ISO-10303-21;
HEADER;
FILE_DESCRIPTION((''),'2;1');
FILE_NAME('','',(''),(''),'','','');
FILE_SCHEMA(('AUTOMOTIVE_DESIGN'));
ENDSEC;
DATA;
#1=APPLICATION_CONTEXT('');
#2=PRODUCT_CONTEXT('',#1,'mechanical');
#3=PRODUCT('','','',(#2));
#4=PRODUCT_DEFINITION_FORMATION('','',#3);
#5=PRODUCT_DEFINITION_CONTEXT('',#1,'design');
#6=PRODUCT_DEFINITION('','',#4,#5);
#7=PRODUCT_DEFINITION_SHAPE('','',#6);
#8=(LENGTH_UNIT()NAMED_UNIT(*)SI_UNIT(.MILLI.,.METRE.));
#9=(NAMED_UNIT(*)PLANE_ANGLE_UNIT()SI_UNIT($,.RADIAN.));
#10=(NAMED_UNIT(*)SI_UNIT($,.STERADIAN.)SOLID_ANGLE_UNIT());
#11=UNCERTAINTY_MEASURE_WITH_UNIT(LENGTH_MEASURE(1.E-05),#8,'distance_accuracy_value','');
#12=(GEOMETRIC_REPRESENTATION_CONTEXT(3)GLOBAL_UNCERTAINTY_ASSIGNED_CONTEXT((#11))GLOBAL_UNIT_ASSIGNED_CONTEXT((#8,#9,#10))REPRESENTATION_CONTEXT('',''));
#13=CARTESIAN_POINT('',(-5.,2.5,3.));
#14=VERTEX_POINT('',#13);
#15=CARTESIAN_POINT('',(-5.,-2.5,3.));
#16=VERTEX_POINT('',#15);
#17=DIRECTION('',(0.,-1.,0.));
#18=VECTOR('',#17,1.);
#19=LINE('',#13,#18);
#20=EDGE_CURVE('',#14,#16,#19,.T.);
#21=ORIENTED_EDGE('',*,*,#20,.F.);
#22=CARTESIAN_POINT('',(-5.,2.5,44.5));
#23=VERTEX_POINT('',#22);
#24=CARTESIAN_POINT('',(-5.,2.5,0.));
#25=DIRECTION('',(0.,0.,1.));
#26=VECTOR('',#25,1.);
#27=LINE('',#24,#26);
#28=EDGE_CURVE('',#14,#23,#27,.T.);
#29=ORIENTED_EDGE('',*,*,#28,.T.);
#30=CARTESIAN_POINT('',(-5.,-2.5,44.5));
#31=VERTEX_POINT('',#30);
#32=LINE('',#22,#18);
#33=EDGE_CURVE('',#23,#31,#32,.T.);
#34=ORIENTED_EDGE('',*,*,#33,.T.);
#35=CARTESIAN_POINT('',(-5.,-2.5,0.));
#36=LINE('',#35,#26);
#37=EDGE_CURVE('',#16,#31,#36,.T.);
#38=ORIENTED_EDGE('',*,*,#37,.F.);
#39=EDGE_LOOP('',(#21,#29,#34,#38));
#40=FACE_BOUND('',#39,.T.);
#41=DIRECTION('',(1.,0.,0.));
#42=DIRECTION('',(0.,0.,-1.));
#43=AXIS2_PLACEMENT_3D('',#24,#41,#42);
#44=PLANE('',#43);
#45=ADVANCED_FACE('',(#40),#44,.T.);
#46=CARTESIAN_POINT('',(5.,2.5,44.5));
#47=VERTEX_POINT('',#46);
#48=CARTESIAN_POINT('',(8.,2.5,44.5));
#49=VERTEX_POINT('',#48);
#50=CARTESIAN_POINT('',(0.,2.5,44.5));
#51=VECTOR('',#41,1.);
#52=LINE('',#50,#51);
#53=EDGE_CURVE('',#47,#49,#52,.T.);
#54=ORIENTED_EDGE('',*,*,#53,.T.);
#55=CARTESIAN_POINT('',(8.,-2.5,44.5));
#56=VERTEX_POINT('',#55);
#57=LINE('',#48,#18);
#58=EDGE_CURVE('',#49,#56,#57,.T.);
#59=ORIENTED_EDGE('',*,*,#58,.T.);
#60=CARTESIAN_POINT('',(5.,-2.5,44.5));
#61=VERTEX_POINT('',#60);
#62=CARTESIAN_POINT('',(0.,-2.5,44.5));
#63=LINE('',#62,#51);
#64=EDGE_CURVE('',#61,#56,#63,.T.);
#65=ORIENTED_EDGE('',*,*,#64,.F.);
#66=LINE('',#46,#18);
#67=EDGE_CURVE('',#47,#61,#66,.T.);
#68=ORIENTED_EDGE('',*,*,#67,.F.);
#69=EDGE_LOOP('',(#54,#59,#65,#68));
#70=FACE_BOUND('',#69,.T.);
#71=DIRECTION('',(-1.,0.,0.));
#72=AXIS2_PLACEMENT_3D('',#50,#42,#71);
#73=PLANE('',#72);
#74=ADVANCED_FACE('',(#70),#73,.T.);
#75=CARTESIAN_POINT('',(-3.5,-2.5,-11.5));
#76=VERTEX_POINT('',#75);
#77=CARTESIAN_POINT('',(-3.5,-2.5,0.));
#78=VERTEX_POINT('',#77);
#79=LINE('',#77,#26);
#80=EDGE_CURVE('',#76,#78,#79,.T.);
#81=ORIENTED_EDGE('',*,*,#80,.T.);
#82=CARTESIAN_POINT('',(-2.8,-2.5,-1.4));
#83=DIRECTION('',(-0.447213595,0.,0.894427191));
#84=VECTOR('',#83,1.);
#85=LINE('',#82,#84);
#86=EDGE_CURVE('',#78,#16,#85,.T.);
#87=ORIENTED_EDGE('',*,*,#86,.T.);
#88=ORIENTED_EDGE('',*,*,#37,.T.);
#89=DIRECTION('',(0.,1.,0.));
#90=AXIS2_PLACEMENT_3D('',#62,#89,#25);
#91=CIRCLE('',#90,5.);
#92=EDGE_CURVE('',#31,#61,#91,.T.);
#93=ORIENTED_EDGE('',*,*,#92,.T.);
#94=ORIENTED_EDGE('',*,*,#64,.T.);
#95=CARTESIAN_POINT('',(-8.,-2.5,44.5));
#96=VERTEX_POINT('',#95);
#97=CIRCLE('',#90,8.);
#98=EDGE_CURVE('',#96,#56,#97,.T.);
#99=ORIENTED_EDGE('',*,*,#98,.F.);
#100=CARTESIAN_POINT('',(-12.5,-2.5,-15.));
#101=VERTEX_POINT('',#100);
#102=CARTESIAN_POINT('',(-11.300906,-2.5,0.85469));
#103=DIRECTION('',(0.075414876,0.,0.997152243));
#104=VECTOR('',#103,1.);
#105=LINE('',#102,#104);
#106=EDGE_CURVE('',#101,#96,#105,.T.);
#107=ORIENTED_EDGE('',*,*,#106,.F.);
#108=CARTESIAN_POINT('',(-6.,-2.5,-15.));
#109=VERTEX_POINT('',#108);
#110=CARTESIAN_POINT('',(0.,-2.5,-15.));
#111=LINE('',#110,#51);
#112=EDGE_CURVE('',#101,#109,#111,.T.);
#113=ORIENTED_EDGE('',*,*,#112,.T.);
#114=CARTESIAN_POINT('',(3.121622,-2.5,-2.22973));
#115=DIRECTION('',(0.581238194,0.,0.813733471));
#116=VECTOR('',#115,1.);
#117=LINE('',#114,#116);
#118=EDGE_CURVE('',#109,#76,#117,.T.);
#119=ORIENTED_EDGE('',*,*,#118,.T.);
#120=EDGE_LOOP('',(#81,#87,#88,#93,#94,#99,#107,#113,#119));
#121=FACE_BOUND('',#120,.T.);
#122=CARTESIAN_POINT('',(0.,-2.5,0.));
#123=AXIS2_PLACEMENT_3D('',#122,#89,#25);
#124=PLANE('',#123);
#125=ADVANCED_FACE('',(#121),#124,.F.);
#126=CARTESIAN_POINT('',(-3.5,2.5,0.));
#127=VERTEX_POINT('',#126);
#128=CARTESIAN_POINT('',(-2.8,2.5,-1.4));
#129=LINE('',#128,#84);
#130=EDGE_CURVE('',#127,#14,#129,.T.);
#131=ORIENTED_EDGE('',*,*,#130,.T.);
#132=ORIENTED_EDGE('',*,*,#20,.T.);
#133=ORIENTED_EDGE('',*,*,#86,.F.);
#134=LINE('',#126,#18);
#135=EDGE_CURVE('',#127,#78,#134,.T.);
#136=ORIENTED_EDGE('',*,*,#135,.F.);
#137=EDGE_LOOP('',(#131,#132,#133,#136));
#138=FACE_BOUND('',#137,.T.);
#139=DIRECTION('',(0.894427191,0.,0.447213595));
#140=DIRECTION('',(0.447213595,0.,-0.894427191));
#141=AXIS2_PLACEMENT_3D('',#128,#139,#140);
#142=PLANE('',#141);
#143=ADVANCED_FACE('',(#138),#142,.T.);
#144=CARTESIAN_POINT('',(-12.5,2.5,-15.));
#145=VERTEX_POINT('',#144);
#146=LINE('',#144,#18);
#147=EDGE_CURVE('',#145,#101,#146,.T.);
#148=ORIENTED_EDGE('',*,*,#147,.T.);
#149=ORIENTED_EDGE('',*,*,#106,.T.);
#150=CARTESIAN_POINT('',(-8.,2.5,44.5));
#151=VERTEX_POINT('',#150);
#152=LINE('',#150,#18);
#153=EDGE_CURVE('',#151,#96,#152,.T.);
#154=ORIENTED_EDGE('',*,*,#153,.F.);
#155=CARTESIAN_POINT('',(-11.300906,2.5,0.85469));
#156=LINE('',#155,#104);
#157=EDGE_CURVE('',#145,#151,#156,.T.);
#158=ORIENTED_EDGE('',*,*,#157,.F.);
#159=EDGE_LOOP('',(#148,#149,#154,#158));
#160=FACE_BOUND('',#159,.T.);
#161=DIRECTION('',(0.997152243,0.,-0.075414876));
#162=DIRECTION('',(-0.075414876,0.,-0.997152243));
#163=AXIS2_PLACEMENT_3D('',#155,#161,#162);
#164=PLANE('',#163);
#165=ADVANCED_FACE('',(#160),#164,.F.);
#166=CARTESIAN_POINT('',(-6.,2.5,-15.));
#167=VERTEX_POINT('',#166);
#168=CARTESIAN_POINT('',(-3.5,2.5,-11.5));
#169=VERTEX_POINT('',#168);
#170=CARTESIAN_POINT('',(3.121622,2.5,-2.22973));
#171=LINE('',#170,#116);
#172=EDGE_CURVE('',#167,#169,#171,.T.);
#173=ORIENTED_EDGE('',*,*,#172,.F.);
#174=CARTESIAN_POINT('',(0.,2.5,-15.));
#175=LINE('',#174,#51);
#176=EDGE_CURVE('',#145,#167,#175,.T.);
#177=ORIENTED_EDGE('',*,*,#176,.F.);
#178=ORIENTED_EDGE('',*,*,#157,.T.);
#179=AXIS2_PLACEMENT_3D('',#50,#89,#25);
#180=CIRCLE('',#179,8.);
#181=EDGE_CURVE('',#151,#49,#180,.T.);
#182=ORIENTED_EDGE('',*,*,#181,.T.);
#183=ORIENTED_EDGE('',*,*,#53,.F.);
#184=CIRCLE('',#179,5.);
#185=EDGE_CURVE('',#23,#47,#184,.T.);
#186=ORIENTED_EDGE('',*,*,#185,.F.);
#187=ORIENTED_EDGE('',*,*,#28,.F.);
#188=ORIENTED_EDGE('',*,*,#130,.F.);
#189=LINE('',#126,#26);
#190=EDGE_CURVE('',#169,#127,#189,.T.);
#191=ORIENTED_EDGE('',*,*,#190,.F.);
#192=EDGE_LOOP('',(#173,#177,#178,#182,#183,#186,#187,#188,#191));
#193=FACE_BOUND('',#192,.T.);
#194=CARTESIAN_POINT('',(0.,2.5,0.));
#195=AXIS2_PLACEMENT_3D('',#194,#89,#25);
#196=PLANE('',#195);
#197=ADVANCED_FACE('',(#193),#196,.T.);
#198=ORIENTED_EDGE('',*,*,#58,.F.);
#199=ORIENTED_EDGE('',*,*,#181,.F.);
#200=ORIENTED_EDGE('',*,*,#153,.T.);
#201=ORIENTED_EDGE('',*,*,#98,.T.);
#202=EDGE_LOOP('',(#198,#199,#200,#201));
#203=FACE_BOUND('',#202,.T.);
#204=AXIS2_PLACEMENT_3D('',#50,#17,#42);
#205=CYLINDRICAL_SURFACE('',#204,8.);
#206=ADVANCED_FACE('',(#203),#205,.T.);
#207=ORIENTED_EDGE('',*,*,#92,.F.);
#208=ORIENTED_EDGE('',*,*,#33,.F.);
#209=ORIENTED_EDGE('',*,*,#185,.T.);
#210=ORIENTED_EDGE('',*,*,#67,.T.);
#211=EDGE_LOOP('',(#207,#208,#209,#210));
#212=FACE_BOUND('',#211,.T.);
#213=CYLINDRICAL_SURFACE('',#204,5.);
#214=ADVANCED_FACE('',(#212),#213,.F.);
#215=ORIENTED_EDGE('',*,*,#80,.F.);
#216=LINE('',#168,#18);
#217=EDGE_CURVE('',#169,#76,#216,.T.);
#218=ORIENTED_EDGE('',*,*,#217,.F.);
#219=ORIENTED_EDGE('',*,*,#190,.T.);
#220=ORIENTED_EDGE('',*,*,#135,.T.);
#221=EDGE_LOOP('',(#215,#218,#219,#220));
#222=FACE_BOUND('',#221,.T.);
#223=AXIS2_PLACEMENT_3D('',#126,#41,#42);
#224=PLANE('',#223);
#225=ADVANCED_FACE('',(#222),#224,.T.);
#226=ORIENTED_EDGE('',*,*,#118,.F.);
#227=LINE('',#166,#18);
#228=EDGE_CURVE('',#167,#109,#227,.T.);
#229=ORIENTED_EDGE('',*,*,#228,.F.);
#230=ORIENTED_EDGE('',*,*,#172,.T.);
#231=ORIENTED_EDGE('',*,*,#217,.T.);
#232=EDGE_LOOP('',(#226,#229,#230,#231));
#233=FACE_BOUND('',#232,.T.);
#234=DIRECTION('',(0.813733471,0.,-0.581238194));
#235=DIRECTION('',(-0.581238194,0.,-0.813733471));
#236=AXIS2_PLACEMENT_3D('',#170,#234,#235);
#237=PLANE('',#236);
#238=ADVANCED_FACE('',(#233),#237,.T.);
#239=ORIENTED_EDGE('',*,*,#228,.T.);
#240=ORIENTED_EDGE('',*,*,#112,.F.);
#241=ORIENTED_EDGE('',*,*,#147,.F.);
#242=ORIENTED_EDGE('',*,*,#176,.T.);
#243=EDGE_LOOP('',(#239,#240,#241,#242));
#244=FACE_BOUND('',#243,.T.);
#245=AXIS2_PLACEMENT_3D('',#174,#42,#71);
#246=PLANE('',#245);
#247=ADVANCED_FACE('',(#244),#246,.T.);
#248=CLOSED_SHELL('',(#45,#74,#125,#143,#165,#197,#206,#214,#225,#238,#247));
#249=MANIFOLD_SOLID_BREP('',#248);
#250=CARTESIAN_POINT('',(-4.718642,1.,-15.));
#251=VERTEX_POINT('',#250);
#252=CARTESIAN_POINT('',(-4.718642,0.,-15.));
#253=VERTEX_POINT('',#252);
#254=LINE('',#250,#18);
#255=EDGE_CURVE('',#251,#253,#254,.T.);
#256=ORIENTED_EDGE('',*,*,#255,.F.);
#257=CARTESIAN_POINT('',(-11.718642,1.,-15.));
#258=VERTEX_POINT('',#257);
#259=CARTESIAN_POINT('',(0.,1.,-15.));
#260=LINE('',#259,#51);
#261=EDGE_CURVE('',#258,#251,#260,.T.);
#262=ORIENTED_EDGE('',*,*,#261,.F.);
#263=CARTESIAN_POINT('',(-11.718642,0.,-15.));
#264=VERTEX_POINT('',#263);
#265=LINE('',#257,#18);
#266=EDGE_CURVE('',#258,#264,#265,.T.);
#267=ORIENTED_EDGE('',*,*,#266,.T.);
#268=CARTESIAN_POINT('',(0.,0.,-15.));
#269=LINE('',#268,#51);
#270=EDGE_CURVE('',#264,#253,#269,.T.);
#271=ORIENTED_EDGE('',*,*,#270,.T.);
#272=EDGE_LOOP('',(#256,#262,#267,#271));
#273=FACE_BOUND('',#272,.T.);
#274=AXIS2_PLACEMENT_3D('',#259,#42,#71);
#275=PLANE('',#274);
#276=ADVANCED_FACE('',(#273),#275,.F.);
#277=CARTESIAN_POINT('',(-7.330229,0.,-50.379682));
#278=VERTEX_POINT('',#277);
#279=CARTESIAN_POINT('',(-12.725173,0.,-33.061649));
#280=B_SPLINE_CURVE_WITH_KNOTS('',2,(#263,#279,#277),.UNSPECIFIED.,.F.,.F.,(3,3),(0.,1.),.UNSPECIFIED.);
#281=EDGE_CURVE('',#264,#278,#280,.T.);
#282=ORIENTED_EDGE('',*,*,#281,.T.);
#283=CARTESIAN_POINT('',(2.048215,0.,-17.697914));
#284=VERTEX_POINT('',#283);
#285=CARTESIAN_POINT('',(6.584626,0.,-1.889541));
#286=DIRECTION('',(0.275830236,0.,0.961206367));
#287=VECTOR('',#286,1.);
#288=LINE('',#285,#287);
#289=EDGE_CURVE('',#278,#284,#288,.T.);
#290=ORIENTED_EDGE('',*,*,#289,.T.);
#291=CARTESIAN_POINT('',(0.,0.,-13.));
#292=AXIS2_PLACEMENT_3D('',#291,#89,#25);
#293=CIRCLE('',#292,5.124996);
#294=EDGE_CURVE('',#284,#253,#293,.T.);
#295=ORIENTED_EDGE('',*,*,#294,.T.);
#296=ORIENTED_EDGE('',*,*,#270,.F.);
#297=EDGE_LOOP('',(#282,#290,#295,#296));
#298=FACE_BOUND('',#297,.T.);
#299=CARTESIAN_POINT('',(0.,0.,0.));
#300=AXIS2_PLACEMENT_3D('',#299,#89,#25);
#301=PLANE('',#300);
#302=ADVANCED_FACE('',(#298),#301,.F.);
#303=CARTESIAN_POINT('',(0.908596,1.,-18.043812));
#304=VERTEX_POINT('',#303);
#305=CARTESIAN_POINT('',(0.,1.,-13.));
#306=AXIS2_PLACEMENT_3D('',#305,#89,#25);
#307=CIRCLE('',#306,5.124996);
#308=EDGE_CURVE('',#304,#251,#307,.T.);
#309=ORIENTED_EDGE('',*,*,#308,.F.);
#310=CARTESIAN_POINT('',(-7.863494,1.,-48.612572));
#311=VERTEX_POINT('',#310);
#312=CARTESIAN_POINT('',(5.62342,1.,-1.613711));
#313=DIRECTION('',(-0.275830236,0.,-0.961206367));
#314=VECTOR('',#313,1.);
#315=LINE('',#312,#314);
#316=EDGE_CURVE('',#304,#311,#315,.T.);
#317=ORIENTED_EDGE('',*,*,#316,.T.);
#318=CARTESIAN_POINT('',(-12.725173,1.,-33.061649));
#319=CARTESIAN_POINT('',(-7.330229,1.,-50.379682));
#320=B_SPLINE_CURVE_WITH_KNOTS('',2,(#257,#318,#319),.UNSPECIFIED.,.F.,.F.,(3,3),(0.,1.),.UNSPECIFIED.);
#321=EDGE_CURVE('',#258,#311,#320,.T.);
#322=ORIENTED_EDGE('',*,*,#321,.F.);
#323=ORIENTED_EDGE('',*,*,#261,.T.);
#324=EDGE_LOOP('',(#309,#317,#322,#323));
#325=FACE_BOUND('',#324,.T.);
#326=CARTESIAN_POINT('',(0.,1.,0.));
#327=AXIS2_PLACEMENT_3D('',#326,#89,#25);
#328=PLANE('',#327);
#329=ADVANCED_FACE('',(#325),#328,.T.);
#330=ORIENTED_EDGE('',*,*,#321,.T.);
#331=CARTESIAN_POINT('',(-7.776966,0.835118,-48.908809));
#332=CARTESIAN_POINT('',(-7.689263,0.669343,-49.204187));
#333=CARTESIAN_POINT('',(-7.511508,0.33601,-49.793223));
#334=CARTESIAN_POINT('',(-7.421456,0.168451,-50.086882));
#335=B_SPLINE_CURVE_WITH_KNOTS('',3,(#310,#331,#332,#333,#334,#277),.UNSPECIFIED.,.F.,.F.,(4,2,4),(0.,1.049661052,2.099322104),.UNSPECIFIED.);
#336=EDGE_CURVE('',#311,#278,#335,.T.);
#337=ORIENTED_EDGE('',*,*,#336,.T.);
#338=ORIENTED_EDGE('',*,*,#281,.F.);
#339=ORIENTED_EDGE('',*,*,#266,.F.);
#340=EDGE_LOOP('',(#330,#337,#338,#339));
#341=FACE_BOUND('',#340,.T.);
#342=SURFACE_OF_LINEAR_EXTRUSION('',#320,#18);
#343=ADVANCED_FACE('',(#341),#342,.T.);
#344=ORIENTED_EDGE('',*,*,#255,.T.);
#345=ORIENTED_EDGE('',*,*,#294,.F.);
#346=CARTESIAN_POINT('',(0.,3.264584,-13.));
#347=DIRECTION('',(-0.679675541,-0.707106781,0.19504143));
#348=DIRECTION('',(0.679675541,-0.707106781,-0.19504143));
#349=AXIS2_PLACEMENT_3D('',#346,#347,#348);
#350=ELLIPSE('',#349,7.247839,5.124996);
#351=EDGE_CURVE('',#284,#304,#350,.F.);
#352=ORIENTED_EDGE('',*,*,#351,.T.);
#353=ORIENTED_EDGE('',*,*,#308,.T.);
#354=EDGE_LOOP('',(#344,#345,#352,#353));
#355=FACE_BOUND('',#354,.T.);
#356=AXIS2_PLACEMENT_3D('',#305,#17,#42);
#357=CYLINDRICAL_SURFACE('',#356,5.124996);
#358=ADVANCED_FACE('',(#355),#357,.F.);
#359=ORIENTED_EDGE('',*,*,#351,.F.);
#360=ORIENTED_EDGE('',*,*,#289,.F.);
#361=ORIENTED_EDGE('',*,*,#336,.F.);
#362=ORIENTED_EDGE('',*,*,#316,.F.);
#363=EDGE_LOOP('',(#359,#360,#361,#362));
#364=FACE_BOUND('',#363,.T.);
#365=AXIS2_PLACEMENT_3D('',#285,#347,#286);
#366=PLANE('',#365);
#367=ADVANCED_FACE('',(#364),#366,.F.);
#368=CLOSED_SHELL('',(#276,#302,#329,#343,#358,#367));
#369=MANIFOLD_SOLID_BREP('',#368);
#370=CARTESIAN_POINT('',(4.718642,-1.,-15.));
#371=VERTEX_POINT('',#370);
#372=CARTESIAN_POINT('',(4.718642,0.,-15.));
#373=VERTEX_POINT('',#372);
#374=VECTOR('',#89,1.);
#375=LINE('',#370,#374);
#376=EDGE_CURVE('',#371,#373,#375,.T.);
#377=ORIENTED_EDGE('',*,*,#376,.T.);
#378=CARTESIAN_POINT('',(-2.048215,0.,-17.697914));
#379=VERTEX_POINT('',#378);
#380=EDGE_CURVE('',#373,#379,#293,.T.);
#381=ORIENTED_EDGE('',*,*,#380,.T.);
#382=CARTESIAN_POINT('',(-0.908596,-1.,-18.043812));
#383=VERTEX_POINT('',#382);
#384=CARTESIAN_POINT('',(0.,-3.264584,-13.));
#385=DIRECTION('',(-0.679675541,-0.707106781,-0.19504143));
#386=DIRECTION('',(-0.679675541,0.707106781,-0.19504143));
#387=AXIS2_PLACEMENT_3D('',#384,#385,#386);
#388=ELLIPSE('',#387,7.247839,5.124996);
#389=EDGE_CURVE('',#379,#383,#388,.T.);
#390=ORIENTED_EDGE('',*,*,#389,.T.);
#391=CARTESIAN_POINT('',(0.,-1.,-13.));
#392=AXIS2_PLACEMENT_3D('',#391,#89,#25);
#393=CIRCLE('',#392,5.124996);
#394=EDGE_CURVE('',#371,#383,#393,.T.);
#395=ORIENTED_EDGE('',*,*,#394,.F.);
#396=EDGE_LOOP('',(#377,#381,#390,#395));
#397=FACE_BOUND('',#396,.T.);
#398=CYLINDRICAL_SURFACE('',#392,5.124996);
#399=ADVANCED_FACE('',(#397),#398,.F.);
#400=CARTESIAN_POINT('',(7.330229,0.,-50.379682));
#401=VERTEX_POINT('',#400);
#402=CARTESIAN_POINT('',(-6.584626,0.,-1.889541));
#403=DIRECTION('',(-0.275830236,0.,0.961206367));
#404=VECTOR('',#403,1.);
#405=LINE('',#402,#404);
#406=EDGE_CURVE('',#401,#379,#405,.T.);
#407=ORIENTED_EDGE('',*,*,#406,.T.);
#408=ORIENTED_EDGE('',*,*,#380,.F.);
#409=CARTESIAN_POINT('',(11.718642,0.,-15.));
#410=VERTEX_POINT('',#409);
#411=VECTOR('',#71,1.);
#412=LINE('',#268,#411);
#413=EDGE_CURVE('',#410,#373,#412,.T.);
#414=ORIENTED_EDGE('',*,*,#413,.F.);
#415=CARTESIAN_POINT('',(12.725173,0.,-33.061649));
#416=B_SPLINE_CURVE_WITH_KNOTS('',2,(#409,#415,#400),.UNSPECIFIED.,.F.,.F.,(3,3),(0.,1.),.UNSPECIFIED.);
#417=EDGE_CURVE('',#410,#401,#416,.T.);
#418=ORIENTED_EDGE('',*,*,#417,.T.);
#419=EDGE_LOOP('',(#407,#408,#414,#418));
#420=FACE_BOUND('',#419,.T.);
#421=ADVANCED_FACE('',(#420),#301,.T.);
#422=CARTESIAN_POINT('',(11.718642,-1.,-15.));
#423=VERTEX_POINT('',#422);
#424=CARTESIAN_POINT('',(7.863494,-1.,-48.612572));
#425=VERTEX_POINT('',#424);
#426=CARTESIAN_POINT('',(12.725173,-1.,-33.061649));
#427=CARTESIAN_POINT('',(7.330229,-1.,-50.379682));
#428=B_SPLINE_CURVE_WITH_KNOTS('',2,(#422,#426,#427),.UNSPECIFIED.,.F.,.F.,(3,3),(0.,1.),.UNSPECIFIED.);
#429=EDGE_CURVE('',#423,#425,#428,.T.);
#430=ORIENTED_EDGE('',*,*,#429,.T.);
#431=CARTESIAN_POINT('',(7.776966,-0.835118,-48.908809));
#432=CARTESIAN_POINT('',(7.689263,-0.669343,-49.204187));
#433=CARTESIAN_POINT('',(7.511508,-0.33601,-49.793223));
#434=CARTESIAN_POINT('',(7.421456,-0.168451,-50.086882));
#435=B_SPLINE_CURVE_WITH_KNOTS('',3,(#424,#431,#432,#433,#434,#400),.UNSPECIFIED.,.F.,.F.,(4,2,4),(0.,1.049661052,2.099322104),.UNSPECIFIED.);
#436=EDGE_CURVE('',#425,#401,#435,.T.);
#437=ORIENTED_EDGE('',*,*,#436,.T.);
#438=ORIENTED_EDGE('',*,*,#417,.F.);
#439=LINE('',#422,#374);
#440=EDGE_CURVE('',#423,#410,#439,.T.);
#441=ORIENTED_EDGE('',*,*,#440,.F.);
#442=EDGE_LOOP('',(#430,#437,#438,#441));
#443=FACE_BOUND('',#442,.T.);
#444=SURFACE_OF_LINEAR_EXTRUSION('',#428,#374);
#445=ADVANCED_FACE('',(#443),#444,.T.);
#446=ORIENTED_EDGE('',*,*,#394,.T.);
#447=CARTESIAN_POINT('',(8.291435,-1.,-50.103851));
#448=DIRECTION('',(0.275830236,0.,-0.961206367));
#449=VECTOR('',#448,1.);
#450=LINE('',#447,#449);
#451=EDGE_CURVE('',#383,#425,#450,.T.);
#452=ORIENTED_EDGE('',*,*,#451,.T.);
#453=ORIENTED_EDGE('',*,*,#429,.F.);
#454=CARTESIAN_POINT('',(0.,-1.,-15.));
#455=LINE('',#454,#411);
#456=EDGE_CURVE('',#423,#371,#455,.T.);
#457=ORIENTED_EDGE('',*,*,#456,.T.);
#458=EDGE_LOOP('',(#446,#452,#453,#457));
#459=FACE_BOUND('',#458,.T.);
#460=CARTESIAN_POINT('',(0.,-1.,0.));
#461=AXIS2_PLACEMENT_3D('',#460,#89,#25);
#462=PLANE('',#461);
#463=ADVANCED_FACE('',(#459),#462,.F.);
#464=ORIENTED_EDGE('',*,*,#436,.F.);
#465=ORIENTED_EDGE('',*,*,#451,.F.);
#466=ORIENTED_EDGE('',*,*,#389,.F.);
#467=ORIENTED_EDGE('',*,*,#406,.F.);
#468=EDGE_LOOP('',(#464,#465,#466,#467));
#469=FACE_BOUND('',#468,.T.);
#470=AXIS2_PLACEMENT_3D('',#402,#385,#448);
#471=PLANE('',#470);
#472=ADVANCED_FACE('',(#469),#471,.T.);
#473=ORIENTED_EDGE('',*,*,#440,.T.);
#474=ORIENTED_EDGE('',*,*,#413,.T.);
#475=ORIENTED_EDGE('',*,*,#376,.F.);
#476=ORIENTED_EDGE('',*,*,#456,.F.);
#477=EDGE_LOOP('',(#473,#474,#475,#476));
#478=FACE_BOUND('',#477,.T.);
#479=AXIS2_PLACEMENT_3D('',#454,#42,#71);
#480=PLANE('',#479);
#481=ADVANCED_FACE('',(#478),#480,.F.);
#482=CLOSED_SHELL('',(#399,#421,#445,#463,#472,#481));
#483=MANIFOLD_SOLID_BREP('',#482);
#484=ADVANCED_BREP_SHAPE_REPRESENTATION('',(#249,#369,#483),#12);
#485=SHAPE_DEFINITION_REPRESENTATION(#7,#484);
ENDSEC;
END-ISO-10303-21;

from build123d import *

# Parameters (mm, degrees)
BOSS_EXTRUDE1_DEPTH = 2.5
BOSS_EXTRUDE2_DEPTH = 1
BOSS_EXTRUDE3_DEPTH = 1
CHAMFER1_SIZE       = 1
CHAMFER2_SIZE       = 1


with BuildPart() as part:
    # Sketch1 → Boss-Extrude1 (new, symmetric)
    with BuildSketch(Plane(origin=(0, 0, 0), x_dir=(1, 0, 0), z_dir=(0, 1, 0))):
        with BuildLine():
            Line((-3.5, 11.5), (-6, 15))
            Line((-6, 15), (-12.5, 15))
            Line((-12.5, 15), (-8, -44.5))
            ThreePointArc((-8, -44.5), (-7.211102551, -41.035898385), (-5, -38.255002002))
            Line((-5, -38.255002002), (-5, -3))
            Line((-5, -3), (-3.5, 0))
            Line((-3.5, 0), (-3.5, 11.5))
        make_face()
        with BuildLine():
            Line((-5, -44.5), (-5, -38.255002002))
            ThreePointArc((-5, -38.255002002), (-7.211102551, -41.035898385), (-8, -44.5))
            ThreePointArc((-8, -44.5), (-5.656854249, -50.156854249), (0, -52.5))
            Line((0, -52.5), (0, -49.5))
            ThreePointArc((0, -49.5), (-3.535533906, -48.035533906), (-5, -44.5))
        make_face()
        with BuildLine():
            ThreePointArc((5, -44.5), (3.535533906, -48.035533906), (0, -49.5))
            Line((0, -49.5), (0, -52.5))
            ThreePointArc((0, -52.5), (5.656854249, -50.156854249), (8, -44.5))
            Line((8, -44.5), (5, -44.5))
        make_face()
    extrude(amount=BOSS_EXTRUDE1_DEPTH, both=True)


with BuildPart() as body_2:
    # Sketch3 → Boss-Extrude2 (new body)
    with BuildSketch(Plane(origin=(0, 0, 0), x_dir=(1, 0, 0), z_dir=(0, 1, 0))):
        with BuildLine():
            Line((0, 24.83548282), (-7.330228596, 50.379681687))
            add(Edge.make_bspline(
                [(-11.71864214, 15), (-12.72517251, 33.061648889), (-7.330228596, 50.379681687)],
                knots=[0, 0, 0, 1, 1, 1], degree=2))
            Line((-11.71864214, 15), (-4.71864214, 15))
            ThreePointArc((-4.71864214, 15), (-3.642426936, 16.605316859), (-2.048214886, 17.69791437))
            Line((-2.048214886, 17.69791437), (0, 24.83548282))
        make_face()
        with BuildLine():
            Line((2.048214886, 17.69791437), (0, 24.83548282))
            Line((0, 24.83548282), (-2.048214886, 17.69791437))
            ThreePointArc((-2.048214886, 17.69791437), (0, 18.124995965), (2.048214886, 17.69791437))
        make_face()
    extrude(amount=BOSS_EXTRUDE2_DEPTH)

    # Chamfer1
    chamfer1_edges = [body_2.edges().sort_by_distance(p)[0] for p in [
        (-2.641006855, 1, -34.038798028),
    ]]
    chamfer(chamfer1_edges, length=CHAMFER1_SIZE - 0.0001)  # a hair under: the kernel refuses the full size


with BuildPart() as body_3:
    # Sketch3<3> → Boss-Extrude3 (new body)
    with BuildSketch(Plane(origin=(0, 0, 0), x_dir=(1, 0, 0), z_dir=(0, 1, 0))):
        with BuildLine():
            Line((7.330228596, 50.379681687), (0, 24.83548282))
            Line((0, 24.83548282), (2.048214886, 17.69791437))
            ThreePointArc((2.048214886, 17.69791437), (3.642426936, 16.605316859), (4.71864214, 15))
            Line((4.71864214, 15), (11.71864214, 15))
            add(Edge.make_bspline(
                [(11.71864214, 15), (12.72517251, 33.061648889), (7.330228596, 50.379681687)],
                knots=[0, 0, 0, 1, 1, 1], degree=2))
        make_face()
        with BuildLine():
            Line((2.048214886, 17.69791437), (0, 24.83548282))
            Line((0, 24.83548282), (-2.048214886, 17.69791437))
            ThreePointArc((-2.048214886, 17.69791437), (0, 18.124995965), (2.048214886, 17.69791437))
        make_face()
    extrude(amount=-BOSS_EXTRUDE3_DEPTH)

    # Chamfer2
    chamfer2_edges = [body_3.edges().sort_by_distance(p)[0] for p in [
        (2.641006855, -1, -34.038798028),
    ]]
    chamfer(chamfer2_edges, length=CHAMFER2_SIZE - 0.0001)  # a hair under: the kernel refuses the full size


solid = Compound([part.part, body_2.part, body_3.part])
